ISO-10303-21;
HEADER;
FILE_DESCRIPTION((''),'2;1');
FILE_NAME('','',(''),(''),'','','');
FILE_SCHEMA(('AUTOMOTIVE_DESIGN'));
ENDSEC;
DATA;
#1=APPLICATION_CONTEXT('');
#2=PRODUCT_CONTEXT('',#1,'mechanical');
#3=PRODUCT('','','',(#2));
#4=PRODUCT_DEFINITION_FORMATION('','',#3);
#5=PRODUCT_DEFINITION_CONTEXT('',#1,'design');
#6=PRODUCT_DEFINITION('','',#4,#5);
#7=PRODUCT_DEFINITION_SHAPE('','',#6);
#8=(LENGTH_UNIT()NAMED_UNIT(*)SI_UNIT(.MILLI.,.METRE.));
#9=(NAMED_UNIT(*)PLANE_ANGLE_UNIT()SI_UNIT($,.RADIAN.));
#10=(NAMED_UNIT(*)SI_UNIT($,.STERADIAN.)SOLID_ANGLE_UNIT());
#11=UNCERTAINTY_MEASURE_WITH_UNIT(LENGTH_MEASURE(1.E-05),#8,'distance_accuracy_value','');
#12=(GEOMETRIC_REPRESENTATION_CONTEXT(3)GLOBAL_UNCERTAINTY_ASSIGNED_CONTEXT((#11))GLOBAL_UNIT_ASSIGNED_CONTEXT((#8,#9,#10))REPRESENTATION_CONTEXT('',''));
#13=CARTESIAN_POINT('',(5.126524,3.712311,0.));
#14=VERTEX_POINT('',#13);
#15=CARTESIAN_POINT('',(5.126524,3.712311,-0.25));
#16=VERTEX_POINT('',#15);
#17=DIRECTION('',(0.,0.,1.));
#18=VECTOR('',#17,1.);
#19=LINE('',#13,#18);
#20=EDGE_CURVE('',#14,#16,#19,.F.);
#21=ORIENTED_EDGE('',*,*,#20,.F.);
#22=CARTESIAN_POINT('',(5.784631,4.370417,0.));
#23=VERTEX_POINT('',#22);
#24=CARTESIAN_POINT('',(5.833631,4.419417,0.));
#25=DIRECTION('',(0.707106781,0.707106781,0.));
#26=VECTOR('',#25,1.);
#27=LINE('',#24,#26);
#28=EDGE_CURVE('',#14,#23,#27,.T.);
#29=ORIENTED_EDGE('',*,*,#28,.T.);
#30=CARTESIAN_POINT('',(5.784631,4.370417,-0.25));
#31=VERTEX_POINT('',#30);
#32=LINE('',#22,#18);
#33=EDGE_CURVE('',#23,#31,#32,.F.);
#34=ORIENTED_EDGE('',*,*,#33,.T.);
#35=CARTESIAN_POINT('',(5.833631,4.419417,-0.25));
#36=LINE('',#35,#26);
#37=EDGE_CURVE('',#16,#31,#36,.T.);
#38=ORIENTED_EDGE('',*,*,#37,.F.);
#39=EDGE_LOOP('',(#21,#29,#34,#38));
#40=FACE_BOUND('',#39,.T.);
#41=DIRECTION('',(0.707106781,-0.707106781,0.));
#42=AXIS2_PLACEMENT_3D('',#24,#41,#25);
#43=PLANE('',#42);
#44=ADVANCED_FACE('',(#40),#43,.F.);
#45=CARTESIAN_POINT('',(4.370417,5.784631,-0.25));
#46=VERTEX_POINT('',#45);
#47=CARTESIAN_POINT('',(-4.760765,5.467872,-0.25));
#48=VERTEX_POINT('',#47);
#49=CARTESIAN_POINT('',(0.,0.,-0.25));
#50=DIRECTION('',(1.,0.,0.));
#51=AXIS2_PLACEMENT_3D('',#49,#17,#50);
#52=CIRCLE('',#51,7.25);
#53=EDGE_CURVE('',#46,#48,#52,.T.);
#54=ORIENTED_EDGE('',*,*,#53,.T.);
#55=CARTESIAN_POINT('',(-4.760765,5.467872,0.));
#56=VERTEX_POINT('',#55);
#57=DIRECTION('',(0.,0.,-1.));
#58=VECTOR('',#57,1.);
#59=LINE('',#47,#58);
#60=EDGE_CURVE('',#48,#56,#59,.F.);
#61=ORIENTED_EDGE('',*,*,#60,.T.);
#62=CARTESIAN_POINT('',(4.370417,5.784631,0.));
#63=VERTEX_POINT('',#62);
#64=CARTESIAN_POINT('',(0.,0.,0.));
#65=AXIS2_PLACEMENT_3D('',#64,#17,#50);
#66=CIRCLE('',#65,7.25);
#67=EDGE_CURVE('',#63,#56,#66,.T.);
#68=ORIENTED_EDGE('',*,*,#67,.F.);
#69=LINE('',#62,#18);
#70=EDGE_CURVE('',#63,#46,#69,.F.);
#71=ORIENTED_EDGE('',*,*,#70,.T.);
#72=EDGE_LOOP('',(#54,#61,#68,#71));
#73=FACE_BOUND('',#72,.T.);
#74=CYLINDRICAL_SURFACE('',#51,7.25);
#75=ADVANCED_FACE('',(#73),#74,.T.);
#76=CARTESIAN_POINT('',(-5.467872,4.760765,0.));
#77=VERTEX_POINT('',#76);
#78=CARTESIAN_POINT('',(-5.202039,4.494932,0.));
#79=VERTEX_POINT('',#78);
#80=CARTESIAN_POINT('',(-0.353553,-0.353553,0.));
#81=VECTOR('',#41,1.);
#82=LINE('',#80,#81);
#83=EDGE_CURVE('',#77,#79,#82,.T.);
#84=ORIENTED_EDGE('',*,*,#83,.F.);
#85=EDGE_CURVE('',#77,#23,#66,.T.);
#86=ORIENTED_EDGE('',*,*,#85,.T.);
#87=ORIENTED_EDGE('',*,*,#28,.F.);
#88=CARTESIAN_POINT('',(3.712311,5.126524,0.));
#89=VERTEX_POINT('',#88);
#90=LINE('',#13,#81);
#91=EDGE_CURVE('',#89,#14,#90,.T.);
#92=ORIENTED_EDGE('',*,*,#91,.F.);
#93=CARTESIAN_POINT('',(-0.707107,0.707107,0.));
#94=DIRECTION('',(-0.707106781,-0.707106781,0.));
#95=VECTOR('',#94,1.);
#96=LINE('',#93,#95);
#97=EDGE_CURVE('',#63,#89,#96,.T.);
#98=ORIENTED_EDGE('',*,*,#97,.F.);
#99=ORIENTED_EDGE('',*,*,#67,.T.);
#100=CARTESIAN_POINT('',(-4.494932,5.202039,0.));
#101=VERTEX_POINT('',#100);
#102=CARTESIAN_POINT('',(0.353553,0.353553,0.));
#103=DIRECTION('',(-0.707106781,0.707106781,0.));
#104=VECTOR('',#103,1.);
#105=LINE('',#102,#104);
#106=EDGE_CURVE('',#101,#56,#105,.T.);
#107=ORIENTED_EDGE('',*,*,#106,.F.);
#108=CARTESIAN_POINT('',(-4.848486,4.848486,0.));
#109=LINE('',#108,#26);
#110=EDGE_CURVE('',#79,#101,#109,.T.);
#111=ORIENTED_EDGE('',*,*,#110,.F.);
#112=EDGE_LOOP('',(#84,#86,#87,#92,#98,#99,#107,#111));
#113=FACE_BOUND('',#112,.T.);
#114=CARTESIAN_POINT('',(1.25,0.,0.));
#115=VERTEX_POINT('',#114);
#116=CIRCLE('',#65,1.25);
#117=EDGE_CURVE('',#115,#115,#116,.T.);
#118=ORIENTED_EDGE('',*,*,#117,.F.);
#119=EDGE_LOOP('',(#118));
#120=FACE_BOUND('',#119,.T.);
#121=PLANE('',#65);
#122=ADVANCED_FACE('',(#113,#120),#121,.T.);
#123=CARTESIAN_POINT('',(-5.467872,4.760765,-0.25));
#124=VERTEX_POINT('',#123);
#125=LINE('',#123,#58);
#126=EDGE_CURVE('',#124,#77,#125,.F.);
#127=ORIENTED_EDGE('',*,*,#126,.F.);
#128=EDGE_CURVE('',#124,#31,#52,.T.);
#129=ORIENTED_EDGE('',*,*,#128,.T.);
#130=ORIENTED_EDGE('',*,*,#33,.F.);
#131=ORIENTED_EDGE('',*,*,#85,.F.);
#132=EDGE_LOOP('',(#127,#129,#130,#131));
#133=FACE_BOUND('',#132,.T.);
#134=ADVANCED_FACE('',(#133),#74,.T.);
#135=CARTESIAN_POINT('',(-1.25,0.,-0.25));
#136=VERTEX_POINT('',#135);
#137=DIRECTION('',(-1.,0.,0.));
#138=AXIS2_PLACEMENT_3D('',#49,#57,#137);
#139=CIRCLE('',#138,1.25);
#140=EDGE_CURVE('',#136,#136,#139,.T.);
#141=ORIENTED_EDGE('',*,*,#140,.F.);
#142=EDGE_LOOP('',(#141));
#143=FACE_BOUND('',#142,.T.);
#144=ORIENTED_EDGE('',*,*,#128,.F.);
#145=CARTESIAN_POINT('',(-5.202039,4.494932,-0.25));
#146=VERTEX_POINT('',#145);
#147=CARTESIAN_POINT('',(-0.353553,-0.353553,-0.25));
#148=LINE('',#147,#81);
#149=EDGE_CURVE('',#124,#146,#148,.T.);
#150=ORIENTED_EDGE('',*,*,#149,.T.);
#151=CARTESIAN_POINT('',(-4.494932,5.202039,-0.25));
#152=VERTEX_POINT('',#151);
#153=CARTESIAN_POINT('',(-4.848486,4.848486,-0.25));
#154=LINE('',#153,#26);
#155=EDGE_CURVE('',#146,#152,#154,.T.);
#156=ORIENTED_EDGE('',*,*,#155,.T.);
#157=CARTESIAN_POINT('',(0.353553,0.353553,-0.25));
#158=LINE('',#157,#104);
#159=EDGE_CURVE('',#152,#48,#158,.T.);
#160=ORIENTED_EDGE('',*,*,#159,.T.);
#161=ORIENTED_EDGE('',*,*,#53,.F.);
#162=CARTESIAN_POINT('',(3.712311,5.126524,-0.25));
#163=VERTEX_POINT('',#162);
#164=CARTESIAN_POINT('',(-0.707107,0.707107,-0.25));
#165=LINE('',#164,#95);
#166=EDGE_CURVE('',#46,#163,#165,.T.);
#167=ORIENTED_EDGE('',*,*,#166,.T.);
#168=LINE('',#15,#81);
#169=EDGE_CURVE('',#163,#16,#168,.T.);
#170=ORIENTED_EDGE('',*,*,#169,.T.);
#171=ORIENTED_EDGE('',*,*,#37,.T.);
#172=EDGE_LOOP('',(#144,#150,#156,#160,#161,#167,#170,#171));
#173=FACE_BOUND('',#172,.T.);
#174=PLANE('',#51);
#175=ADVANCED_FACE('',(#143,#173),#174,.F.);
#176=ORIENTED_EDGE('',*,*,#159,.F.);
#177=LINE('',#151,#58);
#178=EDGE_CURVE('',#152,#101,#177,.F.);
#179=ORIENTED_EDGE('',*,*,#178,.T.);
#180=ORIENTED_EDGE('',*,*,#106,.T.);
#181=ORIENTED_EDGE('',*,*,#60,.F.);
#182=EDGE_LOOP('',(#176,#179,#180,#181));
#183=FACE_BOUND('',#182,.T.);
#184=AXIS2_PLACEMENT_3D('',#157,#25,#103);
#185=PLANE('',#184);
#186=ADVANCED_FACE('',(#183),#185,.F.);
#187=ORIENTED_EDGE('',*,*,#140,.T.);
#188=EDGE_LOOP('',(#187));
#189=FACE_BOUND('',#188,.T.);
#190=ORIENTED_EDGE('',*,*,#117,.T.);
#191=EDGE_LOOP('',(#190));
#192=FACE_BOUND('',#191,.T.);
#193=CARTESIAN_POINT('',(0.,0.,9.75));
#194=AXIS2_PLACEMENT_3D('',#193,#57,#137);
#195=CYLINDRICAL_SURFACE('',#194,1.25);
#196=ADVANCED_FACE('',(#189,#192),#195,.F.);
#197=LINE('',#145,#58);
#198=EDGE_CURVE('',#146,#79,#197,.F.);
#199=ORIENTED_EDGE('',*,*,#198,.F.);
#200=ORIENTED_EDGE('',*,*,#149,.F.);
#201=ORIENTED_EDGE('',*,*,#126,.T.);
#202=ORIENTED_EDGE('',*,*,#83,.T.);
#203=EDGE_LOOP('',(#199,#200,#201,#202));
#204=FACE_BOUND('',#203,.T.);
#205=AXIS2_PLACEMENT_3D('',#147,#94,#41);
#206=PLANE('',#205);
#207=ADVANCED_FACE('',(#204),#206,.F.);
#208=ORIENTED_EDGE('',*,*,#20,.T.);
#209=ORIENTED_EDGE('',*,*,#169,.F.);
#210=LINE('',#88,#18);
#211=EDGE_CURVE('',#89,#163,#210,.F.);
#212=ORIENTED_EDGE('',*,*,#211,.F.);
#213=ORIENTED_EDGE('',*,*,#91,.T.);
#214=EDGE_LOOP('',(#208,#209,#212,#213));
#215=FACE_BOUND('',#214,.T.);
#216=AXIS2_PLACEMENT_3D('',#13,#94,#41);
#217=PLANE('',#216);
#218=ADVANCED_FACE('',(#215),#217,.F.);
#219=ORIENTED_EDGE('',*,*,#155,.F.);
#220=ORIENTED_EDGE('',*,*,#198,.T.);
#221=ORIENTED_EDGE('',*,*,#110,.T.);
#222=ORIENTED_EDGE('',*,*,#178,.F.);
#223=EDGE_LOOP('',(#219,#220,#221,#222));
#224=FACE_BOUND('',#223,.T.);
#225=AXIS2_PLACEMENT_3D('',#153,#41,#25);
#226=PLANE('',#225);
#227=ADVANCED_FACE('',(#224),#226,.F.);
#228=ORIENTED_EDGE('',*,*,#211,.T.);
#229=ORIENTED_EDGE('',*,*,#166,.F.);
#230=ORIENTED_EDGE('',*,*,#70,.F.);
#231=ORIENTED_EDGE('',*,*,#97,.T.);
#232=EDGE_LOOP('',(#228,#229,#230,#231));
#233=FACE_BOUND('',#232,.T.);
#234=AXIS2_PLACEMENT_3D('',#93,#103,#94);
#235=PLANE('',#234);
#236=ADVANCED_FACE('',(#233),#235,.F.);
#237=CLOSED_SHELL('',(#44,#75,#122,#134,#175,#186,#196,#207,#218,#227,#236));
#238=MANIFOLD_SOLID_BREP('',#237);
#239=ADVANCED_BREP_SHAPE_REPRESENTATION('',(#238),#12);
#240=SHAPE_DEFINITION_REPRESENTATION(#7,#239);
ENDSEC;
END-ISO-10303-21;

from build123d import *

# Parameters (mm, degrees)
CROQUIS1_R            = 7.25
BRIDA_BASE1_DEPTH     = 0.25
CROQUIS5_R            = 1.25
CORTAR_EXTRUIR1_DEPTH = 10
CORTAR_EXTRUIR2_DEPTH = 10


# Sheet-metal steps are written as plain solids
with BuildPart() as part:
    # Croquis1 → Brida base1 (new body)
    with BuildSketch(Plane.XY):
        Circle(CROQUIS1_R)
    extrude(amount=-BRIDA_BASE1_DEPTH)

    # Croquis5 → Cortar-Extruir1 (cut)
    with BuildSketch(Plane(origin=(0, 0, -0.25), x_dir=(-1, 0, 0), z_dir=(0, 0, -1))):
        Circle(CROQUIS5_R)
    extrude(amount=-CORTAR_EXTRUIR1_DEPTH, mode=Mode.SUBTRACT)

    # Croquis6 → Cortar-Extruir2 (cut)
    with BuildSketch(Plane.XY):
        Polygon((-5.480077554, 4.772970773), (-4.772970773, 5.480077554), (-4.494932198, 5.202038979), (-5.202038979, 4.494932198), align=None)
        Polygon((5.833630945, 4.419417382), (4.419417382, 5.833630945), (3.712310601, 5.126524164), (5.126524164, 3.712310601), align=None)
    extrude(amount=-CORTAR_EXTRUIR2_DEPTH, mode=Mode.SUBTRACT)


solid = part.part
